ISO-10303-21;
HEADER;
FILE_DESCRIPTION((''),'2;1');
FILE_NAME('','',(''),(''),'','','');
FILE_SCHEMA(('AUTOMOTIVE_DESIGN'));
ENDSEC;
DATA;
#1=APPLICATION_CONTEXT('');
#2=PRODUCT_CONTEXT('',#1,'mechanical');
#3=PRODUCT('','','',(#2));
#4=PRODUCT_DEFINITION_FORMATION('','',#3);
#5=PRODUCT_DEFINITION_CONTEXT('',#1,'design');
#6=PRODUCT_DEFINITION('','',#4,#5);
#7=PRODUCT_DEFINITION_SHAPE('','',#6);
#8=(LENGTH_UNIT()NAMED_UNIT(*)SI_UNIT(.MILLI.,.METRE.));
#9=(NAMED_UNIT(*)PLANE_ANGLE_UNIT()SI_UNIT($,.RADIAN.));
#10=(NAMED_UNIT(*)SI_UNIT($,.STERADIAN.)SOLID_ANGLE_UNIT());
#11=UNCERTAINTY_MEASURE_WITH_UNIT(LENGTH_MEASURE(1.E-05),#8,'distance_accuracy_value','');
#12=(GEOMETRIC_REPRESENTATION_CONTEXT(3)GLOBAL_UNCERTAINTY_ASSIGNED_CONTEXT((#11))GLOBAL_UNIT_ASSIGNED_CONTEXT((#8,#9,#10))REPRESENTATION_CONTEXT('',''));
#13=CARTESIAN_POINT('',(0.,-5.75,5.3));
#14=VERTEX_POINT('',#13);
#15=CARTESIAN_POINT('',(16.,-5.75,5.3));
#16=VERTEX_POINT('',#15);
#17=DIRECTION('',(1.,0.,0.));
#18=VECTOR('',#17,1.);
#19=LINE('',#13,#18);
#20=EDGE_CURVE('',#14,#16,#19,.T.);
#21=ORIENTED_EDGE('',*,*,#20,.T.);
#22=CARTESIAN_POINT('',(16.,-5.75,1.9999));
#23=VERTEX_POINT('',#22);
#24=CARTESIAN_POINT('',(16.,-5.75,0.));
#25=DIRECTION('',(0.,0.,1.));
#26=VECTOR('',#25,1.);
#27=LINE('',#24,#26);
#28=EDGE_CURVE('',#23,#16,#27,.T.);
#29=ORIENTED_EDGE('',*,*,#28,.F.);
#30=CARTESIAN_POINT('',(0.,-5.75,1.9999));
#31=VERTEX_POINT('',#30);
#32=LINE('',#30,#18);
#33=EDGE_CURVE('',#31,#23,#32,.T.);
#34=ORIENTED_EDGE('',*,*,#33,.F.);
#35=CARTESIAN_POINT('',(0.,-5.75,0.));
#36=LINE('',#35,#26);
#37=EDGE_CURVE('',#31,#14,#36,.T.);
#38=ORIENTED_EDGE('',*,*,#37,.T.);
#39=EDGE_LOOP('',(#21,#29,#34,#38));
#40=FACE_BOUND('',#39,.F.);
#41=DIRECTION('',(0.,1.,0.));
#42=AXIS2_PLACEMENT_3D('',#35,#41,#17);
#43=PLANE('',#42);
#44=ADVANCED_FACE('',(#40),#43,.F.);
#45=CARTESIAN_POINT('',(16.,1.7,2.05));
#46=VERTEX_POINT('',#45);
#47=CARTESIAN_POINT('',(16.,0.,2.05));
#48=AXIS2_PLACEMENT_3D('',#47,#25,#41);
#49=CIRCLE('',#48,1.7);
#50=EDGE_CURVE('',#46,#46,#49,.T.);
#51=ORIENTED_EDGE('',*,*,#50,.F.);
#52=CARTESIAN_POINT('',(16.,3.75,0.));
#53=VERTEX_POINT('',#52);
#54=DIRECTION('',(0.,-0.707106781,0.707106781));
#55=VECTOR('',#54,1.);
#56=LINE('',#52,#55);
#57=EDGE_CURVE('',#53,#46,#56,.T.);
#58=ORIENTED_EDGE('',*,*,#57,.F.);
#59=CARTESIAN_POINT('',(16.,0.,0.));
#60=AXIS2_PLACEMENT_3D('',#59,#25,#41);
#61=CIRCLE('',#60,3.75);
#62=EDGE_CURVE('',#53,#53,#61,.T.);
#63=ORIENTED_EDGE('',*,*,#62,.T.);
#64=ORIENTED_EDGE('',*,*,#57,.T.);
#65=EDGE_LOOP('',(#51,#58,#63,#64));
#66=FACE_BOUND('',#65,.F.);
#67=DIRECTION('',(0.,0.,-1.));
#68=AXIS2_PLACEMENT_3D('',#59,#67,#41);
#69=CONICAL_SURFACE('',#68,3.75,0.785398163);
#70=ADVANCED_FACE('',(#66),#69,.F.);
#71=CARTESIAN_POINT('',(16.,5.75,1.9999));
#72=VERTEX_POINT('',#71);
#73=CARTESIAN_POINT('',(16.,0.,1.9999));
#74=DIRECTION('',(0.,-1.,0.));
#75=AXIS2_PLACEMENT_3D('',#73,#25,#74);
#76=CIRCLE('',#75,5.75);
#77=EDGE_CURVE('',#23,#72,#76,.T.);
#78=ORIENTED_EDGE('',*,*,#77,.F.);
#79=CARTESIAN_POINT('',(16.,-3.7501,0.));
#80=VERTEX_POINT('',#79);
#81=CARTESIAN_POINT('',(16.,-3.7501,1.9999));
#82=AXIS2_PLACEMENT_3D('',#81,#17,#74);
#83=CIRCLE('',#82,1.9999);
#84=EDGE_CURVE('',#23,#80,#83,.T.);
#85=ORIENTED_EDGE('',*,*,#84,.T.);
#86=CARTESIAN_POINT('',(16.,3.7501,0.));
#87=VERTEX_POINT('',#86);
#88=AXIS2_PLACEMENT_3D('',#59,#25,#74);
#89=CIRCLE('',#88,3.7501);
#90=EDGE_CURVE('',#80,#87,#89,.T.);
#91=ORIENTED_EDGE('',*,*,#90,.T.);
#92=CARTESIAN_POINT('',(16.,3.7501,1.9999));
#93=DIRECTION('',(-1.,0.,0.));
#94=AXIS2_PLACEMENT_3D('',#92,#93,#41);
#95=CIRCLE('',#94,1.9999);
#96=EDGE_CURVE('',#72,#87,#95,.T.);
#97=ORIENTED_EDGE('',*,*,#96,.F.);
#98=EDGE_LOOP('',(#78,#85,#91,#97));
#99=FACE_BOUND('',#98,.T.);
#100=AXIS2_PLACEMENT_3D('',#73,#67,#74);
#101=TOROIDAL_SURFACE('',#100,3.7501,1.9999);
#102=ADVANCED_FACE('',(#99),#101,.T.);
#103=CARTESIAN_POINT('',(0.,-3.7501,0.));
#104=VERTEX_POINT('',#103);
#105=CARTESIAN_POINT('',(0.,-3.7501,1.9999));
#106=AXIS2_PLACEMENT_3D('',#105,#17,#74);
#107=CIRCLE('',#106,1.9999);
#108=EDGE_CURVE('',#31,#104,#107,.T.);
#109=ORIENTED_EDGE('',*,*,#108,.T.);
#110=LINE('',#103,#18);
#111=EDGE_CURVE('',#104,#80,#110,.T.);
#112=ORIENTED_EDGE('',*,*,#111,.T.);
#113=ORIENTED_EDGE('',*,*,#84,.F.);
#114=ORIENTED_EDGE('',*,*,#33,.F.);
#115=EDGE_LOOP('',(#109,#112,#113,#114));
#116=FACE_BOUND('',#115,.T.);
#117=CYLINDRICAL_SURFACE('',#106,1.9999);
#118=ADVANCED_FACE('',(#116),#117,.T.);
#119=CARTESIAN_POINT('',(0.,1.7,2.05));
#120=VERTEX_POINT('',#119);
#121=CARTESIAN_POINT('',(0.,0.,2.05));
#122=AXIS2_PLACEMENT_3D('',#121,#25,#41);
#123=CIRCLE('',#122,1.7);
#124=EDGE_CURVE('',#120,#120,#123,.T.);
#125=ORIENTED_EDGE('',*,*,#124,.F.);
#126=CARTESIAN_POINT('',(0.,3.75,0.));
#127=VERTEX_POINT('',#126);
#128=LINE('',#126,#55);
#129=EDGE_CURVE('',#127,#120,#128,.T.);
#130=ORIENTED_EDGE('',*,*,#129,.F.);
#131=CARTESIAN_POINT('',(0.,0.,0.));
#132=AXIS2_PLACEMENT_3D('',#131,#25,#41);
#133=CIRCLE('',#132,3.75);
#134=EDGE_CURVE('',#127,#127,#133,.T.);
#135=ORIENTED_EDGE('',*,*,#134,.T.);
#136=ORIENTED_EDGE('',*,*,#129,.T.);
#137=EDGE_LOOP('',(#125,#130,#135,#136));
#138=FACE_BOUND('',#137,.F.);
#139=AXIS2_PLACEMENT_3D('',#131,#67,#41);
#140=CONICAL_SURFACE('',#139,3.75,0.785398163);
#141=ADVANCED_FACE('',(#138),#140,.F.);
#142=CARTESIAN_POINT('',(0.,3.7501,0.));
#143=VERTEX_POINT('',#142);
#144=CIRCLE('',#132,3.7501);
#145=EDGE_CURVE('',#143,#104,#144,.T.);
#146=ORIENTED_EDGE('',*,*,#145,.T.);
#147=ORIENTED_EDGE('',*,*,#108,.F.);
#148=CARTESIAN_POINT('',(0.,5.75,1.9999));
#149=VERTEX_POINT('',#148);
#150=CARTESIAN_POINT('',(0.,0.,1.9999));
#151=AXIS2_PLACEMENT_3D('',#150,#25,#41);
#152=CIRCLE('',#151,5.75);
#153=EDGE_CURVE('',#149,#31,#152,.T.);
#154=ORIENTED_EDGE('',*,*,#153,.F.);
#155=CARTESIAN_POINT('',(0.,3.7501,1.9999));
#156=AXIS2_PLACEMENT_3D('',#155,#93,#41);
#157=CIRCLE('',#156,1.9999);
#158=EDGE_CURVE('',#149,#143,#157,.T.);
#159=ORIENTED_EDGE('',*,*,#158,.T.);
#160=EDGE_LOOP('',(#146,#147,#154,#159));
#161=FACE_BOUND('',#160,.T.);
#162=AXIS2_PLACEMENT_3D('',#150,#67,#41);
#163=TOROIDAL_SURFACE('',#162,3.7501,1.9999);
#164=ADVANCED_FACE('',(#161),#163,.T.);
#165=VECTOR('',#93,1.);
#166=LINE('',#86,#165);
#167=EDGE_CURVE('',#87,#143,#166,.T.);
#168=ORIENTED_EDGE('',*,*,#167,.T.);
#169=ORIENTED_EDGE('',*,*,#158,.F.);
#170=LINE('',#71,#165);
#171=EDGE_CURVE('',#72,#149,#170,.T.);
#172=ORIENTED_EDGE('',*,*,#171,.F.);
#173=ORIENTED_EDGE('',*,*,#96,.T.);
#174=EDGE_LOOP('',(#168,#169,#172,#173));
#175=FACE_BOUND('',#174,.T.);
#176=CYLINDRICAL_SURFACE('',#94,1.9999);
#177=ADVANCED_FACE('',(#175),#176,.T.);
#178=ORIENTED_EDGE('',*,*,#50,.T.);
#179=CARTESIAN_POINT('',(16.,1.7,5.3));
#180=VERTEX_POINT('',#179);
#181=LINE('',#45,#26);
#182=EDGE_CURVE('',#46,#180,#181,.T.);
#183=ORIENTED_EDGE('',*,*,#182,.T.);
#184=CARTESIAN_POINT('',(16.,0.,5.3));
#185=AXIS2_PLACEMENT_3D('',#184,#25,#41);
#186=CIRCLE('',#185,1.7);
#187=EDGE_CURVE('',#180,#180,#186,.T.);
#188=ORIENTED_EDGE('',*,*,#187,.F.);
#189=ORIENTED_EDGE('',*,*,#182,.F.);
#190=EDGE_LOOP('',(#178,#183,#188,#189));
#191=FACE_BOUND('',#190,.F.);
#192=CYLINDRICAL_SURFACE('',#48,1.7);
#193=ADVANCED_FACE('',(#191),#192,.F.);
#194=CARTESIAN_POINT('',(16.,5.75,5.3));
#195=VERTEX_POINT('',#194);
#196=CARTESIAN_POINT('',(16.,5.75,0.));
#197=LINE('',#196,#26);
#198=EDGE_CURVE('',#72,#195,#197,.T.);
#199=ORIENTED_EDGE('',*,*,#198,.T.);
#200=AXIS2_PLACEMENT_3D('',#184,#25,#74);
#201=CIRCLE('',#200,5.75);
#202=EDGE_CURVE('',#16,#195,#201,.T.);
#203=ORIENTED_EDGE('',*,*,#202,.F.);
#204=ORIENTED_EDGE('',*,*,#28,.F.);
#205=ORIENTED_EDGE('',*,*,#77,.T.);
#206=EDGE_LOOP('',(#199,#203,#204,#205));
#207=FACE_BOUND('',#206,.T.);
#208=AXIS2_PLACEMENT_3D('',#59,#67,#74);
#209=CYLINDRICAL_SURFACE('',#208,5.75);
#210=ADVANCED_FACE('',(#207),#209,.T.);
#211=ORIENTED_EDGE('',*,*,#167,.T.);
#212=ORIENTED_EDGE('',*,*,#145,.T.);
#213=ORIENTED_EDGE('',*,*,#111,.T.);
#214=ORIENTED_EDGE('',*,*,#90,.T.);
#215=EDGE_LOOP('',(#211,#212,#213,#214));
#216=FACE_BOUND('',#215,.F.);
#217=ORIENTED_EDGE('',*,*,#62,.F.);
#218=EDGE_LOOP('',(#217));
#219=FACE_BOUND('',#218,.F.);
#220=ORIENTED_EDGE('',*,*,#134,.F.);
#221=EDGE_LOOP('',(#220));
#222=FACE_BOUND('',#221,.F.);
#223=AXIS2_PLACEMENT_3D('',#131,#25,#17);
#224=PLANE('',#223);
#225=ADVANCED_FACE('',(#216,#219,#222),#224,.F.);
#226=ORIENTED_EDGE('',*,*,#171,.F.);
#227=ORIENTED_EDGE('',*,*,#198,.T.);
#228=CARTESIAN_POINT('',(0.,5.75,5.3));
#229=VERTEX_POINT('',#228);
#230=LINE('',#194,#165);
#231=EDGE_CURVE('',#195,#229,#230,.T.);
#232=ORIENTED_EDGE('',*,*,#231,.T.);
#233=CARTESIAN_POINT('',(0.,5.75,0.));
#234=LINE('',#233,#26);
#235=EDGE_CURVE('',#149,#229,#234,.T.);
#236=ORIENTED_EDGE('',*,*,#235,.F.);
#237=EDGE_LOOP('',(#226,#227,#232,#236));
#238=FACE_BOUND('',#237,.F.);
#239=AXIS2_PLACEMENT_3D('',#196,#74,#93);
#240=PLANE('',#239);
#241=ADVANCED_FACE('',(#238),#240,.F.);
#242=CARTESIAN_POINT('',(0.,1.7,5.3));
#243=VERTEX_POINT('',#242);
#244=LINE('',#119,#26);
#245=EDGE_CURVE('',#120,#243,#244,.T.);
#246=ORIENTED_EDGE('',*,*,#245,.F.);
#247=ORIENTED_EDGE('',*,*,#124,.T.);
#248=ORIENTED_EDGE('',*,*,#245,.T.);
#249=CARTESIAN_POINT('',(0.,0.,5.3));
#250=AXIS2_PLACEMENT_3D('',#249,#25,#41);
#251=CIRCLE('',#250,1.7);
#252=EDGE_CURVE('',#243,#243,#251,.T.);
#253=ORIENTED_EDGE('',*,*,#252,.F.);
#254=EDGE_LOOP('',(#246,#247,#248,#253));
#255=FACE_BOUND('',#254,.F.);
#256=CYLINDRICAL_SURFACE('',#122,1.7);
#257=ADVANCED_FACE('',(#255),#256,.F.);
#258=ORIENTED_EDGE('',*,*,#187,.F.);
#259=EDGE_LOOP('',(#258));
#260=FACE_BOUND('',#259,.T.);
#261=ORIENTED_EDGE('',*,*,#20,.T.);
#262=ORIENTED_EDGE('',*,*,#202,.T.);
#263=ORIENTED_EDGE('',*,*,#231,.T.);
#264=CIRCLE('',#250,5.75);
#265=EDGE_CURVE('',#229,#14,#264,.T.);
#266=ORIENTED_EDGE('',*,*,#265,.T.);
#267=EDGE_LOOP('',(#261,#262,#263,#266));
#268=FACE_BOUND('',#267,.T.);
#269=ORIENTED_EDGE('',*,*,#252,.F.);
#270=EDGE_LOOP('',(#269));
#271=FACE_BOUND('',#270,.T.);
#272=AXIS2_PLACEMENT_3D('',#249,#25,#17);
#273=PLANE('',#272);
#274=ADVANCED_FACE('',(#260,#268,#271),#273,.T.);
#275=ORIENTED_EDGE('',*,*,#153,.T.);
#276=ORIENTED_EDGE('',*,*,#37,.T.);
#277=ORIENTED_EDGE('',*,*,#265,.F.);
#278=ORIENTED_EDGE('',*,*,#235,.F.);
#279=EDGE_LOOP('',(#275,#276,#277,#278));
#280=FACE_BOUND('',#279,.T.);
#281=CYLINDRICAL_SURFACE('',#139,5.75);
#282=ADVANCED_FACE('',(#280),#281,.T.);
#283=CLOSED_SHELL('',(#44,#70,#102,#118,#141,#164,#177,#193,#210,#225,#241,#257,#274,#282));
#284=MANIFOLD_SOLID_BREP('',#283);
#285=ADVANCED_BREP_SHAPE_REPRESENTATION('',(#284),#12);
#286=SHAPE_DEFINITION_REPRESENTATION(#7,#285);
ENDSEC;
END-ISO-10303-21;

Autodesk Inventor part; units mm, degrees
ref_plane "YZ Plane" through (0, 0, 0) normal (1, 0, 0) x (0, 1, 0)
ref_plane "XZ Plane" through (0, 0, 0) normal (0, 1, 0) x (-1, 0, 0)
ref_plane "XY Plane" through (0, 0, 0) normal (0, 0, 1) x (1, 0, 0)
sketch "Skizze1" plane through (0, 0, 0) normal (0, 0, 1) x (1, 0, 0)
  line L0 (0, 0) -> (16, 0) construction
  line L1 (0, -5.75) -> (16, -5.75)
  line L2 (16, 5.75) -> (0, 5.75)
  arc A0 (0, 5.75) -> (0, -5.75) centre (0, 0) ccw
  arc A1 (16, -5.75) -> (16, 5.75) centre (16, 0) ccw
  point P0 (8, 0)
  dimension "d0" = 16
  dimension "d1" = 11.5
extrude "Extrusion1" add sketch "Skizze1" along normal blind 5.3
hole "Bohrung1" at (0, 0, 0) at (16, 0, 0) direction (0, 0, 1) diameter 3.4 end through all countersink diameter 7.5 countersink angle 90 clearance for "Innensechskant-Senkkopfschraube DIN EN ISO 10642" size "M3" standard "DIN"
fillet "Rundung1" radius 2 4 edges at (-5.75, 0, 0) (8, -5.75, 0) (21.75, 0, 0) (8, 5.75, 0)
properties part number "Connector_TopPlate"
